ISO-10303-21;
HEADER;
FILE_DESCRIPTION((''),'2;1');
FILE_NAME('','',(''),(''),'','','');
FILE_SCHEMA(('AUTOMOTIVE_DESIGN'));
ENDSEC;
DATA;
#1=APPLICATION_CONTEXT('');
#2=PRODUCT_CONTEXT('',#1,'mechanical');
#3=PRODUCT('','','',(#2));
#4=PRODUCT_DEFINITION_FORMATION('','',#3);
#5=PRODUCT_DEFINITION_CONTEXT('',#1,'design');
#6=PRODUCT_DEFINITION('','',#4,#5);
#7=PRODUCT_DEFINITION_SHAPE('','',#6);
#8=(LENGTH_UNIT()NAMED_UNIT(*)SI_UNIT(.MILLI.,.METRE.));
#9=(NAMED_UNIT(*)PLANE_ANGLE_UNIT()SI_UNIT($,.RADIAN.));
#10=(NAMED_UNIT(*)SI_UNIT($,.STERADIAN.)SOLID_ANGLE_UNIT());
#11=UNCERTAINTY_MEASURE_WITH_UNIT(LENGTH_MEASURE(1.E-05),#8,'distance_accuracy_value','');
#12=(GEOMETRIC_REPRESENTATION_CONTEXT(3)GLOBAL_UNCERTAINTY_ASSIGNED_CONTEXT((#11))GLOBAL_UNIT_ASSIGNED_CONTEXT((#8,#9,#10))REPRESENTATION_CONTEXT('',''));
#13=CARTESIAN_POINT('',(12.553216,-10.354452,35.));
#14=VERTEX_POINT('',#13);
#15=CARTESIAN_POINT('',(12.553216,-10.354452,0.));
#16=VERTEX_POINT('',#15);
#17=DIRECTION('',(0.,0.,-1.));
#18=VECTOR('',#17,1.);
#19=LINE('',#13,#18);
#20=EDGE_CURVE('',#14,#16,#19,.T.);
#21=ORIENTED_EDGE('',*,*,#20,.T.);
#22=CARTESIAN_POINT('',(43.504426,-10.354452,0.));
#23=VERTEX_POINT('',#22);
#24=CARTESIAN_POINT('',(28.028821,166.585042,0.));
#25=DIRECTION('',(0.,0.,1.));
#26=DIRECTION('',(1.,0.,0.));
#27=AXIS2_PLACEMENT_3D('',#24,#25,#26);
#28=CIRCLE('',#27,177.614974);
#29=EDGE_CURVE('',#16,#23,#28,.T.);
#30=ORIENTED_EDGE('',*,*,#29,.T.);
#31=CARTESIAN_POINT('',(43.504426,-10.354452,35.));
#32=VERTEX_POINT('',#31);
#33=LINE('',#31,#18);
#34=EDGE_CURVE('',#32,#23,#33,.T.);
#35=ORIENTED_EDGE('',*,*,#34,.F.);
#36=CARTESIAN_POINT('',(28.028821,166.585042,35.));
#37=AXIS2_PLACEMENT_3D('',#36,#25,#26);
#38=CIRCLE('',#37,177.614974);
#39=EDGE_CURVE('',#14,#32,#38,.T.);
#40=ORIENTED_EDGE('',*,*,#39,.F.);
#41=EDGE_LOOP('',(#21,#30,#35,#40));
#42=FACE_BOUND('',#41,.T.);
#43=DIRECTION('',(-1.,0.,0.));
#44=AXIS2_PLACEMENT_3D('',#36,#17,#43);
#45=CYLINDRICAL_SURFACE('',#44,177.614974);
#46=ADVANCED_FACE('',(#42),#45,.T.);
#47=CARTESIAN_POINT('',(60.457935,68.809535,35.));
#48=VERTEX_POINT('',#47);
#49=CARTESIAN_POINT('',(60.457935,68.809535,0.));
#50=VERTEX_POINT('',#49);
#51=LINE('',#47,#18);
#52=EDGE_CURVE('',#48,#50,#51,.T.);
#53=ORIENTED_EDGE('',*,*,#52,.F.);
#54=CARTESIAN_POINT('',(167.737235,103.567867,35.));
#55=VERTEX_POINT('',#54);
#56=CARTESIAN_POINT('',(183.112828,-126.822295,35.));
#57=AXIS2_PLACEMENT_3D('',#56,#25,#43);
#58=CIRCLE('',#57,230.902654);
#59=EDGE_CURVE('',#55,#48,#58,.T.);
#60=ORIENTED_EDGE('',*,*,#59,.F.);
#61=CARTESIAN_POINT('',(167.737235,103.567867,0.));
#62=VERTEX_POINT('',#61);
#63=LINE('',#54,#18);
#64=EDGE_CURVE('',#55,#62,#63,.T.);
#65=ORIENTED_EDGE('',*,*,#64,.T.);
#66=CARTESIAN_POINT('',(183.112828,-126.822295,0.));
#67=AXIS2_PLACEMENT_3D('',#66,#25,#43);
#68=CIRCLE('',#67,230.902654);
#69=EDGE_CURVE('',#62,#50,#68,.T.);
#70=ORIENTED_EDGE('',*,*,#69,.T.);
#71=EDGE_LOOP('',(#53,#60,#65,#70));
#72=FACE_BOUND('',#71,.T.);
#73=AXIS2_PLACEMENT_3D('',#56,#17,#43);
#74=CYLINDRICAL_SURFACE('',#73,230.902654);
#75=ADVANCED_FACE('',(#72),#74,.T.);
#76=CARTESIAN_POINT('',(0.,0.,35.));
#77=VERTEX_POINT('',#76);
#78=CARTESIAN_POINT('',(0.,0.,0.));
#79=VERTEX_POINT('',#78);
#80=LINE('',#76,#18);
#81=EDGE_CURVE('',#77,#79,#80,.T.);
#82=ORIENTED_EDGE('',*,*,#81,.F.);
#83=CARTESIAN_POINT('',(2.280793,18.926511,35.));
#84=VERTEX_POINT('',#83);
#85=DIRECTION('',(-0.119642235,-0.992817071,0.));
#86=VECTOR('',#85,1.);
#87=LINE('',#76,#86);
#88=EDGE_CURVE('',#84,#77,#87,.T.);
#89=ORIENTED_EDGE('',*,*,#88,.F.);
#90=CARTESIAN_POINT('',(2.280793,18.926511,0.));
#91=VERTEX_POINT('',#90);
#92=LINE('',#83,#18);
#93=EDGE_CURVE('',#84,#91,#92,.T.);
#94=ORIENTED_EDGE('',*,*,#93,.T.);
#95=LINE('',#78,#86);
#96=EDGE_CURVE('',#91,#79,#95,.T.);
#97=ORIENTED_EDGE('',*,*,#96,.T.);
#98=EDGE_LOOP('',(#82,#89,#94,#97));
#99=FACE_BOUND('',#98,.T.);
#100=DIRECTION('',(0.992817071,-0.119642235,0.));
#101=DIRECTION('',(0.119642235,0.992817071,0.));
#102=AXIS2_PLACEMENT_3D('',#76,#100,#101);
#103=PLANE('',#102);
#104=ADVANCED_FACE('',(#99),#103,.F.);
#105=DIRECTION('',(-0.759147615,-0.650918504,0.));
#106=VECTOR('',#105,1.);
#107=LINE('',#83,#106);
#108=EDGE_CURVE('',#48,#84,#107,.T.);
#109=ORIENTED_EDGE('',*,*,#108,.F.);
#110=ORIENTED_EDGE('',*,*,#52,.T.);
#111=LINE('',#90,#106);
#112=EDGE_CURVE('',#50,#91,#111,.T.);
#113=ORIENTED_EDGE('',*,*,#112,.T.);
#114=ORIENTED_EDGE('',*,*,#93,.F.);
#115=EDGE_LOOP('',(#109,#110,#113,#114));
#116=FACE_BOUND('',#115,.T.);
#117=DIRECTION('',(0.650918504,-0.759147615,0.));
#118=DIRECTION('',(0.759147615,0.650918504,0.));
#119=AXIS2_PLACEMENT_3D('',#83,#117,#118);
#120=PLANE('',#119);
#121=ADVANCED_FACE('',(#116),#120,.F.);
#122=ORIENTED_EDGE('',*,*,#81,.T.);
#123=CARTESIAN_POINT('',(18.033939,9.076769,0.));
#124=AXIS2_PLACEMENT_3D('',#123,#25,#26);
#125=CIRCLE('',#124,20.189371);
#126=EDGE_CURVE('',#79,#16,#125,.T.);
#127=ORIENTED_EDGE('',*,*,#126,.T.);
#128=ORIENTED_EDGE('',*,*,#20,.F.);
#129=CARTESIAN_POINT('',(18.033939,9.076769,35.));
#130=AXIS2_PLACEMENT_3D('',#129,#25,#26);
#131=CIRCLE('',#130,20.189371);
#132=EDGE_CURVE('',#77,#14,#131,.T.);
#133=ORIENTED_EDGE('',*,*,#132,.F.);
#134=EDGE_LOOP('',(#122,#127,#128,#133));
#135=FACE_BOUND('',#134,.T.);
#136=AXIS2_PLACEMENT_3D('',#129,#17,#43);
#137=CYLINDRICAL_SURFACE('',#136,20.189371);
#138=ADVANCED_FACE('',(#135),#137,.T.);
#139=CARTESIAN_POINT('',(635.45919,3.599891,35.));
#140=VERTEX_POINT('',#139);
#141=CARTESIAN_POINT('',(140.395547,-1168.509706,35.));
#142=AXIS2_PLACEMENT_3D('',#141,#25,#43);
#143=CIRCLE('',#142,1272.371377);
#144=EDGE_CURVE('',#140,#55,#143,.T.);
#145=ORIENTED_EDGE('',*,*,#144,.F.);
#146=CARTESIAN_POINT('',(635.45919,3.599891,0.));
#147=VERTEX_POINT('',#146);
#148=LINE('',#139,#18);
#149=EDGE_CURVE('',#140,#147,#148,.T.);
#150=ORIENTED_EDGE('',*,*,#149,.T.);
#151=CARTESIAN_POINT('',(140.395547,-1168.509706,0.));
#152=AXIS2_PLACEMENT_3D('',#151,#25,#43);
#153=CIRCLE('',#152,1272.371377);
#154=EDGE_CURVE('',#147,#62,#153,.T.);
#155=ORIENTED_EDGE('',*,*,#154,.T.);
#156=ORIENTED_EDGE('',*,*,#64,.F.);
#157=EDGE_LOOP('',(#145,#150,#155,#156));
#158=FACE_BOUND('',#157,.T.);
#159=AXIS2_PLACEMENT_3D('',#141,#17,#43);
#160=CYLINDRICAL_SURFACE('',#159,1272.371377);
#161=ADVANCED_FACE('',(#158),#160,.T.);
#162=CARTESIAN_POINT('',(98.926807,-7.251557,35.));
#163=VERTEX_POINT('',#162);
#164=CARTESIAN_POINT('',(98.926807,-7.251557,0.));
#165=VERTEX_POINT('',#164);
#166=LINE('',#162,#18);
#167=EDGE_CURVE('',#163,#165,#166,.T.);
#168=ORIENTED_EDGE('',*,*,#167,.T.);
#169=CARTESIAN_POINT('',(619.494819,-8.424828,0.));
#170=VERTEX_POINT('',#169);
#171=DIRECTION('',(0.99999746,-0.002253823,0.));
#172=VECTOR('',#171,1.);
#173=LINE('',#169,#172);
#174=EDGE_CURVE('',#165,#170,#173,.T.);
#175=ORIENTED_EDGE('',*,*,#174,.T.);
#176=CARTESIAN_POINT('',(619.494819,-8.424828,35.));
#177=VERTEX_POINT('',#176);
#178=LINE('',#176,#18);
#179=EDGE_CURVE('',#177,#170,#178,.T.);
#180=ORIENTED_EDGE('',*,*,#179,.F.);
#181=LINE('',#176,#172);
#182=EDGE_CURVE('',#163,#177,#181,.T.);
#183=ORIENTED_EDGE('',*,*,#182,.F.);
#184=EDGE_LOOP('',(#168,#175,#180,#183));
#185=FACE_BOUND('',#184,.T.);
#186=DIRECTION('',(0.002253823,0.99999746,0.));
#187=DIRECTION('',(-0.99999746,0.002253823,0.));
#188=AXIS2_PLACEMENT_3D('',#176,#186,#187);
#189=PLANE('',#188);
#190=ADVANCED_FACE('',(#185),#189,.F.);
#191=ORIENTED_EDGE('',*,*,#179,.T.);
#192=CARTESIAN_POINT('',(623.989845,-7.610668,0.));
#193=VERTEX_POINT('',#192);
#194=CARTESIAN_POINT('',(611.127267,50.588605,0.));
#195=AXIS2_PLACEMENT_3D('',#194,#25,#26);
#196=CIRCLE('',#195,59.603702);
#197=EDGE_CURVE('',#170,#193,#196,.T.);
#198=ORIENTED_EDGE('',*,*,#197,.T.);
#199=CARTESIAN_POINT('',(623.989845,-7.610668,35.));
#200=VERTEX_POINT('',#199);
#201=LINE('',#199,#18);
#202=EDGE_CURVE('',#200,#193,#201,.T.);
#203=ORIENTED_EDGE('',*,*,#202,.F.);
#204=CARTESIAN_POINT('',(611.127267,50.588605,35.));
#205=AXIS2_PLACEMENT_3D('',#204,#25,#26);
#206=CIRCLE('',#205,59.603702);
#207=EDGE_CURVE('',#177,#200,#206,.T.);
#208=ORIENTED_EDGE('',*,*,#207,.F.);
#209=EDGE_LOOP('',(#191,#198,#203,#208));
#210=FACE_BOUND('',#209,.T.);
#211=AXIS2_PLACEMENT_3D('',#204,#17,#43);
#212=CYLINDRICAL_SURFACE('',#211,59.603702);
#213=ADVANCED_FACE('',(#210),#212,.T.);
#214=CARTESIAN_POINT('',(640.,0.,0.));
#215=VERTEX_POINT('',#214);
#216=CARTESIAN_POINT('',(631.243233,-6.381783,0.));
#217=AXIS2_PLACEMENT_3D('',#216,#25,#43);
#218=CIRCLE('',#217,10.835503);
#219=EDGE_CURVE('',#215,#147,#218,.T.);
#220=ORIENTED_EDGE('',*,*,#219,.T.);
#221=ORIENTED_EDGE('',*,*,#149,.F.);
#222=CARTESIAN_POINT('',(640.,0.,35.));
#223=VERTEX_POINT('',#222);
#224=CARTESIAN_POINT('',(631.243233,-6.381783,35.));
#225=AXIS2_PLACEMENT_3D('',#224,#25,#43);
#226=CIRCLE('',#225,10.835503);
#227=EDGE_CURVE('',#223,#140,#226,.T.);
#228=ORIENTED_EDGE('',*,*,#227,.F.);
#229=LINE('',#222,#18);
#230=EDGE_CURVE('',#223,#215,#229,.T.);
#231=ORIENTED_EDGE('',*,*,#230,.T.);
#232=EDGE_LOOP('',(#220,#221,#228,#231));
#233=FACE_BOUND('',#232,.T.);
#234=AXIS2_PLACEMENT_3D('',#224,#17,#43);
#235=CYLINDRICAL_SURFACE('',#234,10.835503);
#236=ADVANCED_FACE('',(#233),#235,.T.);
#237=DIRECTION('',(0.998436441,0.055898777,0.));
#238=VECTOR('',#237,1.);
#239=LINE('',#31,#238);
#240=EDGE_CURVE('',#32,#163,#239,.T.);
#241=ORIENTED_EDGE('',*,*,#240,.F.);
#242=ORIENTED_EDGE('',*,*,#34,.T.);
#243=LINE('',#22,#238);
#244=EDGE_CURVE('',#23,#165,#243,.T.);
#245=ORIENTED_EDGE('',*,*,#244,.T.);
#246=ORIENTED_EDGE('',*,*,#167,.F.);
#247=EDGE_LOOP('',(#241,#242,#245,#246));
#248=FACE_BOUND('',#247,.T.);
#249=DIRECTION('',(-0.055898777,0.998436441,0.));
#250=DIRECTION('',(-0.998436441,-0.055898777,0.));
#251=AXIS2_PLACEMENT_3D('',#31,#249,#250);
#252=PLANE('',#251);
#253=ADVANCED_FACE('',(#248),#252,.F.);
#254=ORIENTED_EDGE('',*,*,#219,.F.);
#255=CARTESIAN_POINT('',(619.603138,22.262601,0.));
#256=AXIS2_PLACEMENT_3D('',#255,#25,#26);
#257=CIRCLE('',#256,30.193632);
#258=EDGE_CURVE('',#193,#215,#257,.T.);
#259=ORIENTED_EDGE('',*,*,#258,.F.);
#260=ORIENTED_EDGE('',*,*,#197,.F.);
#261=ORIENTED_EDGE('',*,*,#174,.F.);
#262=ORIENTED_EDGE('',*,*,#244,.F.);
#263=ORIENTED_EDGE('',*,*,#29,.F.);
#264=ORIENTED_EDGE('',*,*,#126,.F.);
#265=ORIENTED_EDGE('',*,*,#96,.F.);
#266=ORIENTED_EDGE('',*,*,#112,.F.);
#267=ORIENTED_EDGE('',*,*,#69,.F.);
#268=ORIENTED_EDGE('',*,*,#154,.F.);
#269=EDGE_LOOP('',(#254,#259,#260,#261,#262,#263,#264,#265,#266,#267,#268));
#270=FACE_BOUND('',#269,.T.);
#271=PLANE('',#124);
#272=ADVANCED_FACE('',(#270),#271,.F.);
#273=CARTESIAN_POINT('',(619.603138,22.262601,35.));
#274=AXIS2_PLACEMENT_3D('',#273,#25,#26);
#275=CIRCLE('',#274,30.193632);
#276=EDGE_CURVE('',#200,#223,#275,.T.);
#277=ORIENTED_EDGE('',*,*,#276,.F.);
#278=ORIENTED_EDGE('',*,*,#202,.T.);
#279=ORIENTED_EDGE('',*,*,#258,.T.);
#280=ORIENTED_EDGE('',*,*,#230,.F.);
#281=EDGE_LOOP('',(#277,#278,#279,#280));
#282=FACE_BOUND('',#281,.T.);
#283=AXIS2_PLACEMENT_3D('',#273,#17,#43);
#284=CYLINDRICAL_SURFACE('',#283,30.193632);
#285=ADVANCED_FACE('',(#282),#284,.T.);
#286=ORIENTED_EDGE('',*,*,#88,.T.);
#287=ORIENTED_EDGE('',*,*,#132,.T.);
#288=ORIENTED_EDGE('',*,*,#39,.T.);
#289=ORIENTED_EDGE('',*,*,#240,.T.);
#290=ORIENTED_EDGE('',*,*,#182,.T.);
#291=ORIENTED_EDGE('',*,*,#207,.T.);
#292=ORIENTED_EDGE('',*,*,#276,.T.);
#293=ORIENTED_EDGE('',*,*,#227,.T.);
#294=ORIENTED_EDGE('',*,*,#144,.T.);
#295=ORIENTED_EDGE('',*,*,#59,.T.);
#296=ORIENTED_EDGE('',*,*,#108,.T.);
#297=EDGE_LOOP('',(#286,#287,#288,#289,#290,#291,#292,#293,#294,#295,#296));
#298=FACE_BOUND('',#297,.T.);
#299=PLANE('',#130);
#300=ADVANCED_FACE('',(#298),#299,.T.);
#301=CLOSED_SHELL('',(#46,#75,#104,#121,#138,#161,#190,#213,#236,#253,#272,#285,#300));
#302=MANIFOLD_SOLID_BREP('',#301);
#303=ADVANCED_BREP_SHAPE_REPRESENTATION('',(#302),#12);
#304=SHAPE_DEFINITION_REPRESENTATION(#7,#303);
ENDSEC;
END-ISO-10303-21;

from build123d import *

# Parameters (mm, degrees)
TABAN_FLAN_1_DEPTH = 35


# Sheet-metal steps are written as plain solids
with BuildPart() as part:
    # Çizim1 → Taban-Flanş1 (new body)
    with BuildSketch(Plane.XY):
        with BuildLine():
            Line((619.494818874, -8.424828485), (98.926807278, -7.251557341))
            Line((98.926807278, -7.251557341), (43.504425744, -10.354452253))
            ThreePointArc((43.504425744, -10.354452253), (28.028820782, -11.029931963), (12.553215819, -10.354452253))
            ThreePointArc((12.553215819, -10.354452253), (5.187207724, -6.497959982), (0, 0))
            Line((0, 0), (2.280792838, 18.926510932))
            Line((2.280792838, 18.926510932), (60.45793545, 68.809534856))
            ThreePointArc((60.45793545, 68.809534856), (111.943036833, 92.83857175), (167.737234585, 103.567866957))
            ThreePointArc((167.737234585, 103.567866957), (406.337705204, 75.758628342), (635.459190458, 3.599891337))
            ThreePointArc((635.459190458, 3.599891337), (637.974703815, 2.109119279), (640, 0))
            ThreePointArc((640, 0), (632.566042161, -5.006768243), (623.989844607, -7.610667804))
            ThreePointArc((623.989844607, -7.610667804), (621.750134496, -8.060827589), (619.494818874, -8.424828485))
        make_face()
    extrude(amount=TABAN_FLAN_1_DEPTH)


solid = part.part
